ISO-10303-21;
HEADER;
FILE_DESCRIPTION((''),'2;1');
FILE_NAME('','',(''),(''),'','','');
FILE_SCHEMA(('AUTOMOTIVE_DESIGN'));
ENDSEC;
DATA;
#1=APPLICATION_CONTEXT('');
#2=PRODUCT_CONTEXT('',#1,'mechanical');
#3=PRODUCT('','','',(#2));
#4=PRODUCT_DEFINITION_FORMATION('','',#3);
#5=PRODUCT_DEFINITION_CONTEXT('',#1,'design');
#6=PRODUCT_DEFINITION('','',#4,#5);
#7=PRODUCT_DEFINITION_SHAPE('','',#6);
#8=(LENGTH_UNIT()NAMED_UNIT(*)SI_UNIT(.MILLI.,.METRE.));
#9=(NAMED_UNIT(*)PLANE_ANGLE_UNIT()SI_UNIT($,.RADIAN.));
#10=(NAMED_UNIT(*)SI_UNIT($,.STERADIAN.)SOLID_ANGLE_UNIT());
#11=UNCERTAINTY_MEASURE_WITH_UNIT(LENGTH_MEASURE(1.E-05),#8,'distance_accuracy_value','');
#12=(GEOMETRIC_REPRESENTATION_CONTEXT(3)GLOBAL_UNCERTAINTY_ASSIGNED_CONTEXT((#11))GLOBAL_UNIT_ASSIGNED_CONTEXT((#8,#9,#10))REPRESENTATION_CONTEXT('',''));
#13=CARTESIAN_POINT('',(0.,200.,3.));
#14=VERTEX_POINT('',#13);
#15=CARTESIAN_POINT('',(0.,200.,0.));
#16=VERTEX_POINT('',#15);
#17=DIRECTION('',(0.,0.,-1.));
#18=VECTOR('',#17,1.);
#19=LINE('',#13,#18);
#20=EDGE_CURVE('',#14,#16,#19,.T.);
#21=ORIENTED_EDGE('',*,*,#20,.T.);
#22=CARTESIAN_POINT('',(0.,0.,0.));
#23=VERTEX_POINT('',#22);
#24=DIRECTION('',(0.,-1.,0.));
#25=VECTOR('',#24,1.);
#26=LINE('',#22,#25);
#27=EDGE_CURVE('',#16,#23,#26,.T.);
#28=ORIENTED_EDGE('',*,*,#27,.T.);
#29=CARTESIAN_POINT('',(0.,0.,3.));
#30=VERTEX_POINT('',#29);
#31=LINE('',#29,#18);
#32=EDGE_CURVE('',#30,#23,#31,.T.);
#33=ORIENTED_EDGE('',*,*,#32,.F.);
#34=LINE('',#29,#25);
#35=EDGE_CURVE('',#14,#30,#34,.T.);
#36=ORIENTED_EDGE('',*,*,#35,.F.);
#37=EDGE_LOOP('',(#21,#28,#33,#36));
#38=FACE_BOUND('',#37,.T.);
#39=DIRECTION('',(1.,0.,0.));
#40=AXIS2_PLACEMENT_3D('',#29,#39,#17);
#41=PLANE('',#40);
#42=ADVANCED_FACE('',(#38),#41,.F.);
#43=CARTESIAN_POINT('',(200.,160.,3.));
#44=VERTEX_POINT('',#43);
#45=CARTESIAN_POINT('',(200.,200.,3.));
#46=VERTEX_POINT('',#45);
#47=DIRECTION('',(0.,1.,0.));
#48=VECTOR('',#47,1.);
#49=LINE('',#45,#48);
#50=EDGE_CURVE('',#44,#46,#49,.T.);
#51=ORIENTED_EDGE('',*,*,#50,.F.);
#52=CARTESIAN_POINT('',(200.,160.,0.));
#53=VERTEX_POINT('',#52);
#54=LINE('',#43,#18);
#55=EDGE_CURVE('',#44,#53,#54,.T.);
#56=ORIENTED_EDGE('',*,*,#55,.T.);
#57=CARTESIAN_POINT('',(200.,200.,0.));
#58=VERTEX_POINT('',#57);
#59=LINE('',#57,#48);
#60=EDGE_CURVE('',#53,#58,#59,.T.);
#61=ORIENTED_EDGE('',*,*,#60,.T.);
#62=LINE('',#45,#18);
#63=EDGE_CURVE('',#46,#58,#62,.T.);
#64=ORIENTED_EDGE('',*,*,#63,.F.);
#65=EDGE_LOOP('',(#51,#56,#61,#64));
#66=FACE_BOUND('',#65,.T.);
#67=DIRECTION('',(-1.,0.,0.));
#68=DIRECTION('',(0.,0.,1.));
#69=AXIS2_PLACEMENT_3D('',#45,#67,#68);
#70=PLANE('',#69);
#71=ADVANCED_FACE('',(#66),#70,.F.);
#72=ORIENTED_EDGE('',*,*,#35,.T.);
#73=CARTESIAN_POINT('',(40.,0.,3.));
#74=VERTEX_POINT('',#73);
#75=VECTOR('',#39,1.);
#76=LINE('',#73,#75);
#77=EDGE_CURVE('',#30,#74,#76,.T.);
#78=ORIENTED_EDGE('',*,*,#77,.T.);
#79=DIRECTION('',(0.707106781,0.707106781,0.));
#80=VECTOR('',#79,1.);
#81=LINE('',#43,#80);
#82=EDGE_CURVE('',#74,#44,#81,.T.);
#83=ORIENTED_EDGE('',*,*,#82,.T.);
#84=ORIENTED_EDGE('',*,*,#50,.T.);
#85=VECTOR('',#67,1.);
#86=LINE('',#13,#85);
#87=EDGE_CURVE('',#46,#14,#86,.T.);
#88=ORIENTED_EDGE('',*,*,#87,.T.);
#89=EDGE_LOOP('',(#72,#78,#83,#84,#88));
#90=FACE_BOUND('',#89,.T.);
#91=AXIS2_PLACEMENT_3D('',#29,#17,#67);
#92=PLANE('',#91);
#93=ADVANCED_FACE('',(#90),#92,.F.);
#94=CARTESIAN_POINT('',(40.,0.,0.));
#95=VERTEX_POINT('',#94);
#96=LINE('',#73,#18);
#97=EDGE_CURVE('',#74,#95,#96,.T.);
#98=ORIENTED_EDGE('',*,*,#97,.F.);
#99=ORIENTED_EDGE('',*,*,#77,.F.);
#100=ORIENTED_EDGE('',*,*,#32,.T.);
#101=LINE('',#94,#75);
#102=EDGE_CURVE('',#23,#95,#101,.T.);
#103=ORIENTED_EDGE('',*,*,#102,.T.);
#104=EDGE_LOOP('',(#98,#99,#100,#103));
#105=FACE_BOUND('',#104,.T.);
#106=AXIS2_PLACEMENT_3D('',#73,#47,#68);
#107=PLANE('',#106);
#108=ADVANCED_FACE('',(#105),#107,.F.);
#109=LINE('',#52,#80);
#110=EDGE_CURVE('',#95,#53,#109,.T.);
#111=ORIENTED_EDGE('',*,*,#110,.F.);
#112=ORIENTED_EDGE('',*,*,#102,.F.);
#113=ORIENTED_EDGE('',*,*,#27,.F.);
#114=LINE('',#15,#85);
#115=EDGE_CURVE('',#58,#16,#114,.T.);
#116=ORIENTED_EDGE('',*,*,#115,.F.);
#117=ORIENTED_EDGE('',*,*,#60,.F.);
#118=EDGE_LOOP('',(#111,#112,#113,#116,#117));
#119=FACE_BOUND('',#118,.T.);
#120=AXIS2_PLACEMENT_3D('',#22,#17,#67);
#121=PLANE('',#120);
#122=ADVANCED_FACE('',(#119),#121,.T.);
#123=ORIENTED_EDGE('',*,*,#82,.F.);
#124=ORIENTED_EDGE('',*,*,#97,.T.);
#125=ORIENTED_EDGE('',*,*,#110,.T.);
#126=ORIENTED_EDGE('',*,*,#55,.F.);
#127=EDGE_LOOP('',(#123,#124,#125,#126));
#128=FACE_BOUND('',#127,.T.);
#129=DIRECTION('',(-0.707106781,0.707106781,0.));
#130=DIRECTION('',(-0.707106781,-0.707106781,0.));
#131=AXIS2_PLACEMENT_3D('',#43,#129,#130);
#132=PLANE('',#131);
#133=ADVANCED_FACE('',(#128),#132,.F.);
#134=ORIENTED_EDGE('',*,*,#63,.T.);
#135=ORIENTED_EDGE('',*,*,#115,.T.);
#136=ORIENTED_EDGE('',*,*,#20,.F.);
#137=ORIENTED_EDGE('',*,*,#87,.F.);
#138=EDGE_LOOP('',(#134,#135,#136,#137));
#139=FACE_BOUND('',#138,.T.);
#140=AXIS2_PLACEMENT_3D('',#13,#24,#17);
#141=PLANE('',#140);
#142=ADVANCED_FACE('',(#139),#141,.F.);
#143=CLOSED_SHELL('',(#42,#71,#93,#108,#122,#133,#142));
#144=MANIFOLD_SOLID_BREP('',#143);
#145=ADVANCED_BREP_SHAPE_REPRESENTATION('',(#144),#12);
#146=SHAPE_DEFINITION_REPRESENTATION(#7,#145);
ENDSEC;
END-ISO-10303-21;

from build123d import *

# Parameters (mm, degrees)
ESTRUSIONE_ESTRUSIONE1_DEPTH = 3


with BuildPart() as part:
    # Schizzo1 → Estrusione-Estrusione1 (new body)
    with BuildSketch(Plane.XY):
        Polygon((0, 0), (0, 200), (200, 200), (200, 160), (40, 0), align=None)
    extrude(amount=ESTRUSIONE_ESTRUSIONE1_DEPTH)


solid = part.part
